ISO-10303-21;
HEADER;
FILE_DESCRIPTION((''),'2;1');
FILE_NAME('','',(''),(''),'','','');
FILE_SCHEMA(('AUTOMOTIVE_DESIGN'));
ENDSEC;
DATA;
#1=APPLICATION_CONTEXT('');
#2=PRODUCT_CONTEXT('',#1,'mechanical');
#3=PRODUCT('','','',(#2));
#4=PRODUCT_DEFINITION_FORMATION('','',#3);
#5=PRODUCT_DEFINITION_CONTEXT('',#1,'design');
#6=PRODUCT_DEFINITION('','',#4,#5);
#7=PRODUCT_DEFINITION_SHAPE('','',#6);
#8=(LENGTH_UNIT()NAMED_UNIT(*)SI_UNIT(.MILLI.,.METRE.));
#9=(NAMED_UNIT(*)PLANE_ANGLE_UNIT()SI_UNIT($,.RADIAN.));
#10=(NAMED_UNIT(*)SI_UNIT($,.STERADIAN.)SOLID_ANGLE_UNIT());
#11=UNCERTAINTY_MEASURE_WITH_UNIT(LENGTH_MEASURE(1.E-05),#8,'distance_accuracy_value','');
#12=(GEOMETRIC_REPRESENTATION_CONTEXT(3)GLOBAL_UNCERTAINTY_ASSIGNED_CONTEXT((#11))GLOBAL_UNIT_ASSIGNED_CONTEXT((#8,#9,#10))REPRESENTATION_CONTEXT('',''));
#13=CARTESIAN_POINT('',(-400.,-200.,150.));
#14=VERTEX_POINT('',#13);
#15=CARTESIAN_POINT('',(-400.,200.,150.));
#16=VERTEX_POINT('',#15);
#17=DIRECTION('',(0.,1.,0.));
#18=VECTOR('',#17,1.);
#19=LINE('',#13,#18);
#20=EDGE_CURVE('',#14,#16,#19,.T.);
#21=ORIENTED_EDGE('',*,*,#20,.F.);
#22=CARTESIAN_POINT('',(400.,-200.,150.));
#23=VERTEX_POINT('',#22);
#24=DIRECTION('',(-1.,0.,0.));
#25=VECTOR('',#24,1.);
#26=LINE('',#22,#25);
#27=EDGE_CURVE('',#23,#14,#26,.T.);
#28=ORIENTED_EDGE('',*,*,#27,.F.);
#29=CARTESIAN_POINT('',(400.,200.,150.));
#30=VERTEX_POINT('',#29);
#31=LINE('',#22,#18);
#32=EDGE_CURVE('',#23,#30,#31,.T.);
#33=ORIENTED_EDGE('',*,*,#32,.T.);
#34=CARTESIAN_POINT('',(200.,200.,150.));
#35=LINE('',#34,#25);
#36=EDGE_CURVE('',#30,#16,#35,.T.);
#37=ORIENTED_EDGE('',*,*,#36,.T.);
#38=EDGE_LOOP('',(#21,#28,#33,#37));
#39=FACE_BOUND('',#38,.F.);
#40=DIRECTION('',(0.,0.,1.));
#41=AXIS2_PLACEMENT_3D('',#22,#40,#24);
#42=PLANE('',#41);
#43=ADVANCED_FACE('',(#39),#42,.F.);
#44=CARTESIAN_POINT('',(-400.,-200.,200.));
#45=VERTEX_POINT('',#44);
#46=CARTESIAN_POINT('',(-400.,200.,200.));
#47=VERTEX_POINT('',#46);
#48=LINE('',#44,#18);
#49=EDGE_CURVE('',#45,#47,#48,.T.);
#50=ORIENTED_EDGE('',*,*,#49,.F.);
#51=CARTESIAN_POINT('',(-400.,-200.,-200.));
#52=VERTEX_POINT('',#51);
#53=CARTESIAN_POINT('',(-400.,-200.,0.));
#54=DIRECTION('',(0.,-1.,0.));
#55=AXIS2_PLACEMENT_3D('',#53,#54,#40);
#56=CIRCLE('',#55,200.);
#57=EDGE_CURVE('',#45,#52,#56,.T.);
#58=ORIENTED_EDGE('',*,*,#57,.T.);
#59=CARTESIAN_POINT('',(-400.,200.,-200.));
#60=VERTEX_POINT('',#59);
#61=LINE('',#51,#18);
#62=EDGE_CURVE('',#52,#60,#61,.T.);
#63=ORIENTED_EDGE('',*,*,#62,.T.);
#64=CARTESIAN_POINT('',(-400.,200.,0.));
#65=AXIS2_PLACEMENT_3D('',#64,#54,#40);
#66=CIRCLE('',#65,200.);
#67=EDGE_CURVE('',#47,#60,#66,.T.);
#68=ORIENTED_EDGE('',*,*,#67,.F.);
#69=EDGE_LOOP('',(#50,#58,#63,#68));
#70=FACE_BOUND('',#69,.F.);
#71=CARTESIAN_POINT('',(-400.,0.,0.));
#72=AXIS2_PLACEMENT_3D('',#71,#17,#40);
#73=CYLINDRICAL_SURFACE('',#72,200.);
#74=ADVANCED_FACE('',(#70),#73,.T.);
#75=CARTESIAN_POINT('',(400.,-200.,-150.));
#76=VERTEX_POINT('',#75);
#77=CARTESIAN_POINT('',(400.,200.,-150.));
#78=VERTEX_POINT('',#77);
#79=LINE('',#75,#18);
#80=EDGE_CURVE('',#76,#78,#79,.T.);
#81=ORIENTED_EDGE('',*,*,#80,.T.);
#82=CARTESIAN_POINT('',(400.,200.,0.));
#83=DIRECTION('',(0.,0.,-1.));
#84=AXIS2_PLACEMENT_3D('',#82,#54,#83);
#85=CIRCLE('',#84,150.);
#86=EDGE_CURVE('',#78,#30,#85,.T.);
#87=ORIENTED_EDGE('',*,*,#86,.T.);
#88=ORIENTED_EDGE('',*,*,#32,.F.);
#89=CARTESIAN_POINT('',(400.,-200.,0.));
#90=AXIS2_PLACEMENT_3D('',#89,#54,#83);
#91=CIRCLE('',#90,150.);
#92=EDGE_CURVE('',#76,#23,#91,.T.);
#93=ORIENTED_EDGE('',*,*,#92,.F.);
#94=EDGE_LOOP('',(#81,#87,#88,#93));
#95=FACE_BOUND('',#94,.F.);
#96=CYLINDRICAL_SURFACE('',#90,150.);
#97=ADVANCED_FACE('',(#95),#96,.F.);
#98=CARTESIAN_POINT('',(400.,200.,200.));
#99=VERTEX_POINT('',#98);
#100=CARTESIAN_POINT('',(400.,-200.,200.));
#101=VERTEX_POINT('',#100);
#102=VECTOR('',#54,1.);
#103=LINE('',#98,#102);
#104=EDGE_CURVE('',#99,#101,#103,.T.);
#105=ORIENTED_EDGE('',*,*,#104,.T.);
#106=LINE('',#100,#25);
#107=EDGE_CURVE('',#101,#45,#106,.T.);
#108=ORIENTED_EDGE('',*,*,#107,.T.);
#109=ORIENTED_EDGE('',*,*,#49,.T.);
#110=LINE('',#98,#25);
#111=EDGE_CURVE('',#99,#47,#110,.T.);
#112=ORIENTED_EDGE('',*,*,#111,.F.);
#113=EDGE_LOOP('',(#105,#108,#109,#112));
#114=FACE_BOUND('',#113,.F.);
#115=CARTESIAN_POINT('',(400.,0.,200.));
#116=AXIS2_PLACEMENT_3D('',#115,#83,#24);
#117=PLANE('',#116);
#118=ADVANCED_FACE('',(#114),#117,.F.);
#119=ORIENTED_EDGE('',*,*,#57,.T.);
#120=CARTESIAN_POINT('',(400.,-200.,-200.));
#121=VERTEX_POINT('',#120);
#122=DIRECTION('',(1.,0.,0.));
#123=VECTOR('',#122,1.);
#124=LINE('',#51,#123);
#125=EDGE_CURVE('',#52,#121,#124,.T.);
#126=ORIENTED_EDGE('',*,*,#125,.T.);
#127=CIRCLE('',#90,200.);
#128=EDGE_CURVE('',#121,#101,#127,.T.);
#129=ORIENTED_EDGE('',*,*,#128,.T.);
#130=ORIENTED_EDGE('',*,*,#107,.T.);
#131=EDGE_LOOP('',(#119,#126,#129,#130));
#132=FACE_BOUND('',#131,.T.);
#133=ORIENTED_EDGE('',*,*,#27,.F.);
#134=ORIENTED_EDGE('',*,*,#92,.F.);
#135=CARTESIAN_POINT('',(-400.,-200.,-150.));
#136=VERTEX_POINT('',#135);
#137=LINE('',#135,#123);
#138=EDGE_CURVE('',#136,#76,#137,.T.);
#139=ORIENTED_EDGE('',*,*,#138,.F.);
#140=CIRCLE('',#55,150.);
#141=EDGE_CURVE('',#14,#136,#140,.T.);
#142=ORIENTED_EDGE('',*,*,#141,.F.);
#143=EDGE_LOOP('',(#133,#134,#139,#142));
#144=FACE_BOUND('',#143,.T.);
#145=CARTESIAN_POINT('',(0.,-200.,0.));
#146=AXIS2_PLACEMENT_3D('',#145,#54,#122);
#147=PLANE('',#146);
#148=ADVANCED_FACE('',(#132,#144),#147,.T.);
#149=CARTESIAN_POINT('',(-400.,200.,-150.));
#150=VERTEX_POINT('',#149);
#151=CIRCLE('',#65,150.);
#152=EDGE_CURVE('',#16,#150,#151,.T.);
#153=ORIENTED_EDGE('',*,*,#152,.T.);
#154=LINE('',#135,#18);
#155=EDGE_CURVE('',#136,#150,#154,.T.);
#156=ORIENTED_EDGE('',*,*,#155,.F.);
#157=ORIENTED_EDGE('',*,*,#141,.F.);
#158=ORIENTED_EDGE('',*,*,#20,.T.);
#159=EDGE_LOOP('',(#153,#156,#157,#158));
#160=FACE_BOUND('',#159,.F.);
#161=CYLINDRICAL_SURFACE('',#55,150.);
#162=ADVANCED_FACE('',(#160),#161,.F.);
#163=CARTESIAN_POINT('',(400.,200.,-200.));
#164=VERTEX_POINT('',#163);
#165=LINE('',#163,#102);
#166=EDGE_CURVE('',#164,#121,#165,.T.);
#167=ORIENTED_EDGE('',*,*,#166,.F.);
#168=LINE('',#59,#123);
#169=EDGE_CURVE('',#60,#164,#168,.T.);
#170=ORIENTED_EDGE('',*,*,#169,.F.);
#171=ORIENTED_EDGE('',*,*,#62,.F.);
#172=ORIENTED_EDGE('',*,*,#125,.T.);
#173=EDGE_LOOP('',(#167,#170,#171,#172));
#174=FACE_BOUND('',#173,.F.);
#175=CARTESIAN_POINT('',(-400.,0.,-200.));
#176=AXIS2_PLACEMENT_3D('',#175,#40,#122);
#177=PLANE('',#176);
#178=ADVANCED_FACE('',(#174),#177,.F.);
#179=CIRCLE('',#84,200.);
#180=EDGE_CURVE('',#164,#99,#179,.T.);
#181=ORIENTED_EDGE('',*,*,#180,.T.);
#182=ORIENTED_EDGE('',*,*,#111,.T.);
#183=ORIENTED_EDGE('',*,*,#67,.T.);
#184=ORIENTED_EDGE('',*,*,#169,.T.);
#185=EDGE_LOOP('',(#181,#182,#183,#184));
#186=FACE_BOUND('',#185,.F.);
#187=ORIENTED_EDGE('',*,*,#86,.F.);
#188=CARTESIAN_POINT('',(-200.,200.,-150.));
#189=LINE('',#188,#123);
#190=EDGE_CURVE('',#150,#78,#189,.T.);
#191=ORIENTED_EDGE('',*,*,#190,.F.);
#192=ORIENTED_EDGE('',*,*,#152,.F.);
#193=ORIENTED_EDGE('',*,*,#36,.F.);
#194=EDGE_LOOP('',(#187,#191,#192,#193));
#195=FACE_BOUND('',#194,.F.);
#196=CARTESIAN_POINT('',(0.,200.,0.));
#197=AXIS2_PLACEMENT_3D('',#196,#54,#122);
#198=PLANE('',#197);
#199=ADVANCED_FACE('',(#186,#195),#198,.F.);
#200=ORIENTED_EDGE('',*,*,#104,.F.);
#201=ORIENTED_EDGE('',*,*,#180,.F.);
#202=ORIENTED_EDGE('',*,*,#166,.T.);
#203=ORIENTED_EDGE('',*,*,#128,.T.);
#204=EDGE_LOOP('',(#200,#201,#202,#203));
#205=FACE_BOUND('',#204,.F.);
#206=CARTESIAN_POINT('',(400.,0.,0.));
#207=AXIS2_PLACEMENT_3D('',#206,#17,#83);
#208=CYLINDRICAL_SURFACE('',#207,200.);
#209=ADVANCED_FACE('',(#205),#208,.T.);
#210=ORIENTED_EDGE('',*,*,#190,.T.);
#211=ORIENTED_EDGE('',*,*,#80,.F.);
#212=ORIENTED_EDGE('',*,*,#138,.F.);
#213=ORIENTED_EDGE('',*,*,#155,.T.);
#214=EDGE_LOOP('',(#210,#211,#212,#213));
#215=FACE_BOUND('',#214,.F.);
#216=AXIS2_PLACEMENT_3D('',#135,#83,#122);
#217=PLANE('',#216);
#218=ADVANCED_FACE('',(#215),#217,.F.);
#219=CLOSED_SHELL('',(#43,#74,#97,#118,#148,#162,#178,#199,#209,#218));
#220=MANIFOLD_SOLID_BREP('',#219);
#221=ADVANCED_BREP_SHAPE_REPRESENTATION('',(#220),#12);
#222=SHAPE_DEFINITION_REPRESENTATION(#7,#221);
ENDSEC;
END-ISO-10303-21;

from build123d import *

# Parameters (mm, degrees)
F2_DEPTH      = 200
F2_DEPTH_BACK = 200
F4_DEPTH      = 4000


with BuildPart() as f2:
    # F1 (on face) → F2 (new body, two sides)
    with BuildSketch(Plane.XZ) as f2_sk:
        with BuildLine():
            Line((-400, -200), (400, -200))
            ThreePointArc((400, -200), (600, 0), (400, 200))
            Line((400, 200), (-400, 200))
            ThreePointArc((-400, 200), (-600, 0), (-400, -200))
        make_face()
    extrude(amount=-F2_DEPTH)
    extrude(f2_sk.sketch, amount=F2_DEPTH_BACK)

    # F3 (on face) → F4 (cut)
    with BuildSketch(Plane.XZ.offset(200)):
        with BuildLine():
            Line((-400, -150), (400, -150))
            ThreePointArc((400, -150), (550, 0), (400, 150))
            Line((400, 150), (-400, 150))
            ThreePointArc((-400, 150), (-550, 0), (-400, -150))
        make_face()
    extrude(amount=-F4_DEPTH, mode=Mode.SUBTRACT)


solid = f2.part
